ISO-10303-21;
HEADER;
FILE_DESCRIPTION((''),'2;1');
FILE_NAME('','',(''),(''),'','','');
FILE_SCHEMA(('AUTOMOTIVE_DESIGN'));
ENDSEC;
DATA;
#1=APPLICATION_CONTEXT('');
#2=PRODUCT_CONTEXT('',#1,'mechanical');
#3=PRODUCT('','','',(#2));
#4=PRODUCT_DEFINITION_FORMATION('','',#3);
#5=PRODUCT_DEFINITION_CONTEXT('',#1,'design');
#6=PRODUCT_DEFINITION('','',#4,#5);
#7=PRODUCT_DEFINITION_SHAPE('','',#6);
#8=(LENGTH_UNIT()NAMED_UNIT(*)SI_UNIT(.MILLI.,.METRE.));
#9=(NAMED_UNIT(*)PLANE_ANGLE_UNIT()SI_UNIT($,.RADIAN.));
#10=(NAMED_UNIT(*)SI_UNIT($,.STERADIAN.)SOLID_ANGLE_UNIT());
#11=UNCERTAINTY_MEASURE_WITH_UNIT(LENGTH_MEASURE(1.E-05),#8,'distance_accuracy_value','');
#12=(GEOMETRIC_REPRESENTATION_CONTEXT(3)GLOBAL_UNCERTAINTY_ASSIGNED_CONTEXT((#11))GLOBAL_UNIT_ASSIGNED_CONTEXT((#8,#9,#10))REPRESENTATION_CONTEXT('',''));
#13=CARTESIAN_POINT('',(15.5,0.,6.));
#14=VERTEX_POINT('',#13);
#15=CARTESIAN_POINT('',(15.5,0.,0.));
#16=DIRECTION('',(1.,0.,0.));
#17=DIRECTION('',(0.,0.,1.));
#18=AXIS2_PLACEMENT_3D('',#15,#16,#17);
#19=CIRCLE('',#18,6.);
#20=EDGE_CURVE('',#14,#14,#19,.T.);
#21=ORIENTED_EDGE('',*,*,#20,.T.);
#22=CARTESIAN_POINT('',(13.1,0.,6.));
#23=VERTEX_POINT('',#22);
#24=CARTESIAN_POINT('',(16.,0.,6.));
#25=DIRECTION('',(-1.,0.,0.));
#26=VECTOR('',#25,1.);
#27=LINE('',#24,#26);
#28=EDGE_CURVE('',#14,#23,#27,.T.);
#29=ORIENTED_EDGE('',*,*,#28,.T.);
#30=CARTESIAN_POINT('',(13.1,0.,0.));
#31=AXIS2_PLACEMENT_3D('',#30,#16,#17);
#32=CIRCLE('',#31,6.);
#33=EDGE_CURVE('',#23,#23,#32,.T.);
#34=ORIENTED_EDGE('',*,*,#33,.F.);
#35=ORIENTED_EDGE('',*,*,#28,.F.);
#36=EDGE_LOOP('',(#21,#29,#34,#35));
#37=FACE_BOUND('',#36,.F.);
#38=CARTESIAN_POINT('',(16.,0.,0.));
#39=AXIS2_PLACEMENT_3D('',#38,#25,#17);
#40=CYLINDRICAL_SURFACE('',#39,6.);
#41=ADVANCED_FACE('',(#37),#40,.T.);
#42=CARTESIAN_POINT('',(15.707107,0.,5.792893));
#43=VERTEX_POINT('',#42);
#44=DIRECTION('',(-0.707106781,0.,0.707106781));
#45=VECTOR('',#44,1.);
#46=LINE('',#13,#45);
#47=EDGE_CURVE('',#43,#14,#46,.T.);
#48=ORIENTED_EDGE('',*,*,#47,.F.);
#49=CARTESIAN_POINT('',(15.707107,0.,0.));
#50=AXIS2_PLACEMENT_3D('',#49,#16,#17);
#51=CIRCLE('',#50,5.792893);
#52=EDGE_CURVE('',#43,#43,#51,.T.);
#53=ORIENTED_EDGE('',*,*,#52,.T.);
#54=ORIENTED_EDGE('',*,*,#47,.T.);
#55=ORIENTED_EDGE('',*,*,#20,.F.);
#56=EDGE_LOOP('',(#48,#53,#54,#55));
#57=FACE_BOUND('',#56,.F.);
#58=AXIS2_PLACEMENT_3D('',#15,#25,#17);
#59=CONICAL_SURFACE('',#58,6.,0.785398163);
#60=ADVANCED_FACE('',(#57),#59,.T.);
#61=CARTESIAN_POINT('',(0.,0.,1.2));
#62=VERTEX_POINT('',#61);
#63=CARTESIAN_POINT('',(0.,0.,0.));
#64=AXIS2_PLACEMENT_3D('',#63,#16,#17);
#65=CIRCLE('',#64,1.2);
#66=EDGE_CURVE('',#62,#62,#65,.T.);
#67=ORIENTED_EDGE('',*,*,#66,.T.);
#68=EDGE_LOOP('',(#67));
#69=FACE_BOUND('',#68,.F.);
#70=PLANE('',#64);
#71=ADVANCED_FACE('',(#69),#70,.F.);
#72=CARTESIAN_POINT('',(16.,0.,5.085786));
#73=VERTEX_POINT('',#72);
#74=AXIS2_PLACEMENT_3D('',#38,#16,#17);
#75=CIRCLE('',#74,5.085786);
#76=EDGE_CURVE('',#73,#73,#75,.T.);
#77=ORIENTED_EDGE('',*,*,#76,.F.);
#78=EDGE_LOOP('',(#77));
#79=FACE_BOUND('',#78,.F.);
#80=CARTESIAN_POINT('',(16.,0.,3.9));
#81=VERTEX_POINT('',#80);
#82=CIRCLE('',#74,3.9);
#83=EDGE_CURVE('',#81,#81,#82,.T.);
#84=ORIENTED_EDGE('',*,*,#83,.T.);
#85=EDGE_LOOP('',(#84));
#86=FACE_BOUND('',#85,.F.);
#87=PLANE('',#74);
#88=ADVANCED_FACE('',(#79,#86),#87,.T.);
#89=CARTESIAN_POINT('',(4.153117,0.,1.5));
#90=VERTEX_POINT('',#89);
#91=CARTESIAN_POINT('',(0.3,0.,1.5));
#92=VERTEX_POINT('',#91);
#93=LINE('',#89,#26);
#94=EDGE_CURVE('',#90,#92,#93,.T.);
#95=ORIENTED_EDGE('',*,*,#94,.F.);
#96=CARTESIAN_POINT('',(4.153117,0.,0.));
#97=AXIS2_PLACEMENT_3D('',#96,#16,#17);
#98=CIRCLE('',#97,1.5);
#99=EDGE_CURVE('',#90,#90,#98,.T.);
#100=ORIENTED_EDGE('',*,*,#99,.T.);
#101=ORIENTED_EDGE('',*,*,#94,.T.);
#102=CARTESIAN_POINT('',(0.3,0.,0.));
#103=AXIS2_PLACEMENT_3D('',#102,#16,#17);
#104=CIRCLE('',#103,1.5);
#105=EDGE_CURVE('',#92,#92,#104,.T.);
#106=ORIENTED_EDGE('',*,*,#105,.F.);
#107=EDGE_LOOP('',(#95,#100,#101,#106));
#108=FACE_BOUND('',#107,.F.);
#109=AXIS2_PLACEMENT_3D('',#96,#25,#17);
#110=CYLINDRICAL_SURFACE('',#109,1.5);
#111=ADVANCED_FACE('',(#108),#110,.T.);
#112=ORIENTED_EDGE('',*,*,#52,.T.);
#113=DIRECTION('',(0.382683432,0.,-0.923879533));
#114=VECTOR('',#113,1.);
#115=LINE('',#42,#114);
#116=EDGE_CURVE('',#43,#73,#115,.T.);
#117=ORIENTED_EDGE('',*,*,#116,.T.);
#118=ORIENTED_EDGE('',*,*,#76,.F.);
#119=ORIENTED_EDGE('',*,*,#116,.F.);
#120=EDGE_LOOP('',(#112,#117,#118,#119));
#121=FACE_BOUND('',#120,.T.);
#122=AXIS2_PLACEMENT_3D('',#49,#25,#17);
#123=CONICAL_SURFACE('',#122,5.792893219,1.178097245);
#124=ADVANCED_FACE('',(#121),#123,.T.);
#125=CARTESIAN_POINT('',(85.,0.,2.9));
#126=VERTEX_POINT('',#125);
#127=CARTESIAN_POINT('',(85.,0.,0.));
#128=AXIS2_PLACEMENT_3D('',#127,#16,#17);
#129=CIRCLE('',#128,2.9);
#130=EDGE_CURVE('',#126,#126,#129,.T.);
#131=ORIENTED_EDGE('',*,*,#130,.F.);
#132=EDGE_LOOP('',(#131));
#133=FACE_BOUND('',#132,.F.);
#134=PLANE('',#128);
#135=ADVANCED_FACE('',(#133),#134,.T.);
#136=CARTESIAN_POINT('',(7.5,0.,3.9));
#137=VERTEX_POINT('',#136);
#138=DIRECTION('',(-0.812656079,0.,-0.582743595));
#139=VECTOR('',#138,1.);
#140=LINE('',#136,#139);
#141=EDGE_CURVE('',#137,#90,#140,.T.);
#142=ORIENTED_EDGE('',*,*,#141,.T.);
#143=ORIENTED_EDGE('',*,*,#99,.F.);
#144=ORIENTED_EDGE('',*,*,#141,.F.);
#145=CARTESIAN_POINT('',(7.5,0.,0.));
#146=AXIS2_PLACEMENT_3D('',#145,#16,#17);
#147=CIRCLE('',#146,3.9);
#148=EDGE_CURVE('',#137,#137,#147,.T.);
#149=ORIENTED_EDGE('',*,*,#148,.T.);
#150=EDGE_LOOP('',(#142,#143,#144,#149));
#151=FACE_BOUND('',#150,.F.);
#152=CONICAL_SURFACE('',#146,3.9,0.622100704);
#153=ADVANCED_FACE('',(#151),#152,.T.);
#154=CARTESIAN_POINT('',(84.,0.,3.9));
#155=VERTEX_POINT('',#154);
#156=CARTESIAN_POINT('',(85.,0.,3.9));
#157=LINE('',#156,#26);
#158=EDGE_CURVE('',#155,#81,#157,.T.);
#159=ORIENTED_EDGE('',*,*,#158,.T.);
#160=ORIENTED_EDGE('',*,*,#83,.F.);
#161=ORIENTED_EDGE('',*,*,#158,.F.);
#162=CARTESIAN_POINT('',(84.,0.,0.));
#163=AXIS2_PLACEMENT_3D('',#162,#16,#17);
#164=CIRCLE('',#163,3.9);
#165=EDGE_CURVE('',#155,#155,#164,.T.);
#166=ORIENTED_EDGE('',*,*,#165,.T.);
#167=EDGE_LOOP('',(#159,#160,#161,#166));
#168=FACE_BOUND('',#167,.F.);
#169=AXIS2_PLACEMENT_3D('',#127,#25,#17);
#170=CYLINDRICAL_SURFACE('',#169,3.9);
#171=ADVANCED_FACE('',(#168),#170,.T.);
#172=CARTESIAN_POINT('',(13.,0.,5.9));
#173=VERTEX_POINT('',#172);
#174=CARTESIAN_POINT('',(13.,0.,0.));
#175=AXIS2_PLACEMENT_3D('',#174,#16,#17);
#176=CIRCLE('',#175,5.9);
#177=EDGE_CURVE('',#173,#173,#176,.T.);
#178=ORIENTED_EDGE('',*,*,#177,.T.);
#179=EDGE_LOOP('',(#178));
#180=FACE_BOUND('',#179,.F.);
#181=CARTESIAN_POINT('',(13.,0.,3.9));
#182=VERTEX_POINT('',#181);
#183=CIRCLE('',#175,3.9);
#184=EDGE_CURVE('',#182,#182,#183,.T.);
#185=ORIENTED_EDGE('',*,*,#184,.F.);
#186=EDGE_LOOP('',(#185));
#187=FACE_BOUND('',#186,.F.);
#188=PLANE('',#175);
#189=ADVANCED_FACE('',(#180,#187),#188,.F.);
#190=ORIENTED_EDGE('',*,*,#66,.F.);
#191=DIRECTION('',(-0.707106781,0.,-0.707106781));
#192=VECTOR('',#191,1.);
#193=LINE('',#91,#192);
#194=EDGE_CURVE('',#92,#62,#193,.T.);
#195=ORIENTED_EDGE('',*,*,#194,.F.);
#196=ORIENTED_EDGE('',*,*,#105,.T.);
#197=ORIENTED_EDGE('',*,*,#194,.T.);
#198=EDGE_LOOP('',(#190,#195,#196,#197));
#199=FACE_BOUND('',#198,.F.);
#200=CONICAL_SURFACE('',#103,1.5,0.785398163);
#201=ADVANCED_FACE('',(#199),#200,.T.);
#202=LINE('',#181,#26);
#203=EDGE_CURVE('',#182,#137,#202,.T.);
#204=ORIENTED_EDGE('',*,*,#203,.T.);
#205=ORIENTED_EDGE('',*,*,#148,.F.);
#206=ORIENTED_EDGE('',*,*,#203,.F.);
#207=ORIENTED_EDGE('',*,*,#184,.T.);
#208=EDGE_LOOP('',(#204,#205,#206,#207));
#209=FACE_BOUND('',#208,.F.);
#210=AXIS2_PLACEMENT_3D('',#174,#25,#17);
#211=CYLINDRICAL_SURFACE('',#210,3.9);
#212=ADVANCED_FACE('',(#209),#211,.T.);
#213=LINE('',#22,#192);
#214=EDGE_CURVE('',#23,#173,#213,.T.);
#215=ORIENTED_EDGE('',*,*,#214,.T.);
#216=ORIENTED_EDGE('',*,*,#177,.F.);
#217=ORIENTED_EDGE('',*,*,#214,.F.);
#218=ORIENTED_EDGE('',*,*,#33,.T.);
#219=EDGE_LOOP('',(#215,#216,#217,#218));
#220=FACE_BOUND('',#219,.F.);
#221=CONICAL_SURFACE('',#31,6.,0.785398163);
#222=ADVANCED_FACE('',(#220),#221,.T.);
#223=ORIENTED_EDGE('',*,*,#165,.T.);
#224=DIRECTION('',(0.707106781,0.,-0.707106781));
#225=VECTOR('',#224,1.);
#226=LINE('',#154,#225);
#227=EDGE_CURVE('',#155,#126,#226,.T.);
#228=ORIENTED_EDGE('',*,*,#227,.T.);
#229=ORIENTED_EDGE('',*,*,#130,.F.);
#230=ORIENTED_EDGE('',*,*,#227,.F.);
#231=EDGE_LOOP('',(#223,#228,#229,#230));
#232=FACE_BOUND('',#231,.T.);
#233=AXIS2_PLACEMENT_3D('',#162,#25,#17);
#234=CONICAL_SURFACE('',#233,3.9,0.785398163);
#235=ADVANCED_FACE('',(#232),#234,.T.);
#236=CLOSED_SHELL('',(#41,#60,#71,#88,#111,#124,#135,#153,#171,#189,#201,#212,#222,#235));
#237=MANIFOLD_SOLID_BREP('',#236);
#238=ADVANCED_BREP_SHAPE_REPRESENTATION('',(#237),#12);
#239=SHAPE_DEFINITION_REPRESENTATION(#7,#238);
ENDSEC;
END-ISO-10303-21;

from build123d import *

# Parameters (mm, degrees)
F0_W    = 14
F0_H    = 3.9
F2_SIZE = 0.5
F3_SIZE = 0.1
F4_SIZE = 0.3


# Not quite as in the source:
# - a fillet or chamfer that OpenCascade refuses, or shapes differently, is made with other operations: its cross-section is extruded or revolved along the edge and cut away or added


with BuildPart() as f1:
    # F0 (on Front) → F1 (revolve)
    with BuildSketch(Plane.XZ):
        Polygon((0, 1.5), (0, 0), (71, 0), (71, 3.9), (16, 3.9), (16, 6), (13, 6), (13, 3.9), (7.5, 3.9), (4.1531170718, 1.5), align=None)
        with Locations((78, 1.95)):
            Rectangle(F0_W, F0_H)
    revolve(axis=Axis((35.5, 0, 0), (1, 0, 0)))

    # F2
    f2_edges = [f1.edges().sort_by_distance(p)[0] for p in [
        (16, 0, -6),
    ]]
    chamfer(f2_edges, length=F2_SIZE)

    # F3
    f3_edges = [f1.edges().sort_by_distance(p)[0] for p in [
        (13, 0, -6),
    ]]
    chamfer(f3_edges, length=F3_SIZE)

    # F4
    f4_edges = [f1.edges().sort_by_distance(p)[0] for p in [
        (0, 0, -1.5),
    ]]
    chamfer(f4_edges, length=F4_SIZE)

    # F5: chamfer of 1 on 2 edges, made by hand

    # F5_s1 → F5_t2 (revolve, cut)
    with BuildSketch(Plane.XZ):
        Polygon((15.7071067812, 5.7928932188), (16, 5.0857864376), (16, 5.5), align=None)
    revolve(axis=Axis((16, 0, 0), (1, 0, 0)), mode=Mode.SUBTRACT)

    # F5_s3 → F5_t4 (revolve, cut)
    with BuildSketch(Plane.XZ):
        Polygon((84, 3.9), (85, 2.9), (85, 3.9), align=None)
    revolve(axis=Axis((85, 0, 0), (1, 0, 0)), mode=Mode.SUBTRACT)


solid = f1.part
